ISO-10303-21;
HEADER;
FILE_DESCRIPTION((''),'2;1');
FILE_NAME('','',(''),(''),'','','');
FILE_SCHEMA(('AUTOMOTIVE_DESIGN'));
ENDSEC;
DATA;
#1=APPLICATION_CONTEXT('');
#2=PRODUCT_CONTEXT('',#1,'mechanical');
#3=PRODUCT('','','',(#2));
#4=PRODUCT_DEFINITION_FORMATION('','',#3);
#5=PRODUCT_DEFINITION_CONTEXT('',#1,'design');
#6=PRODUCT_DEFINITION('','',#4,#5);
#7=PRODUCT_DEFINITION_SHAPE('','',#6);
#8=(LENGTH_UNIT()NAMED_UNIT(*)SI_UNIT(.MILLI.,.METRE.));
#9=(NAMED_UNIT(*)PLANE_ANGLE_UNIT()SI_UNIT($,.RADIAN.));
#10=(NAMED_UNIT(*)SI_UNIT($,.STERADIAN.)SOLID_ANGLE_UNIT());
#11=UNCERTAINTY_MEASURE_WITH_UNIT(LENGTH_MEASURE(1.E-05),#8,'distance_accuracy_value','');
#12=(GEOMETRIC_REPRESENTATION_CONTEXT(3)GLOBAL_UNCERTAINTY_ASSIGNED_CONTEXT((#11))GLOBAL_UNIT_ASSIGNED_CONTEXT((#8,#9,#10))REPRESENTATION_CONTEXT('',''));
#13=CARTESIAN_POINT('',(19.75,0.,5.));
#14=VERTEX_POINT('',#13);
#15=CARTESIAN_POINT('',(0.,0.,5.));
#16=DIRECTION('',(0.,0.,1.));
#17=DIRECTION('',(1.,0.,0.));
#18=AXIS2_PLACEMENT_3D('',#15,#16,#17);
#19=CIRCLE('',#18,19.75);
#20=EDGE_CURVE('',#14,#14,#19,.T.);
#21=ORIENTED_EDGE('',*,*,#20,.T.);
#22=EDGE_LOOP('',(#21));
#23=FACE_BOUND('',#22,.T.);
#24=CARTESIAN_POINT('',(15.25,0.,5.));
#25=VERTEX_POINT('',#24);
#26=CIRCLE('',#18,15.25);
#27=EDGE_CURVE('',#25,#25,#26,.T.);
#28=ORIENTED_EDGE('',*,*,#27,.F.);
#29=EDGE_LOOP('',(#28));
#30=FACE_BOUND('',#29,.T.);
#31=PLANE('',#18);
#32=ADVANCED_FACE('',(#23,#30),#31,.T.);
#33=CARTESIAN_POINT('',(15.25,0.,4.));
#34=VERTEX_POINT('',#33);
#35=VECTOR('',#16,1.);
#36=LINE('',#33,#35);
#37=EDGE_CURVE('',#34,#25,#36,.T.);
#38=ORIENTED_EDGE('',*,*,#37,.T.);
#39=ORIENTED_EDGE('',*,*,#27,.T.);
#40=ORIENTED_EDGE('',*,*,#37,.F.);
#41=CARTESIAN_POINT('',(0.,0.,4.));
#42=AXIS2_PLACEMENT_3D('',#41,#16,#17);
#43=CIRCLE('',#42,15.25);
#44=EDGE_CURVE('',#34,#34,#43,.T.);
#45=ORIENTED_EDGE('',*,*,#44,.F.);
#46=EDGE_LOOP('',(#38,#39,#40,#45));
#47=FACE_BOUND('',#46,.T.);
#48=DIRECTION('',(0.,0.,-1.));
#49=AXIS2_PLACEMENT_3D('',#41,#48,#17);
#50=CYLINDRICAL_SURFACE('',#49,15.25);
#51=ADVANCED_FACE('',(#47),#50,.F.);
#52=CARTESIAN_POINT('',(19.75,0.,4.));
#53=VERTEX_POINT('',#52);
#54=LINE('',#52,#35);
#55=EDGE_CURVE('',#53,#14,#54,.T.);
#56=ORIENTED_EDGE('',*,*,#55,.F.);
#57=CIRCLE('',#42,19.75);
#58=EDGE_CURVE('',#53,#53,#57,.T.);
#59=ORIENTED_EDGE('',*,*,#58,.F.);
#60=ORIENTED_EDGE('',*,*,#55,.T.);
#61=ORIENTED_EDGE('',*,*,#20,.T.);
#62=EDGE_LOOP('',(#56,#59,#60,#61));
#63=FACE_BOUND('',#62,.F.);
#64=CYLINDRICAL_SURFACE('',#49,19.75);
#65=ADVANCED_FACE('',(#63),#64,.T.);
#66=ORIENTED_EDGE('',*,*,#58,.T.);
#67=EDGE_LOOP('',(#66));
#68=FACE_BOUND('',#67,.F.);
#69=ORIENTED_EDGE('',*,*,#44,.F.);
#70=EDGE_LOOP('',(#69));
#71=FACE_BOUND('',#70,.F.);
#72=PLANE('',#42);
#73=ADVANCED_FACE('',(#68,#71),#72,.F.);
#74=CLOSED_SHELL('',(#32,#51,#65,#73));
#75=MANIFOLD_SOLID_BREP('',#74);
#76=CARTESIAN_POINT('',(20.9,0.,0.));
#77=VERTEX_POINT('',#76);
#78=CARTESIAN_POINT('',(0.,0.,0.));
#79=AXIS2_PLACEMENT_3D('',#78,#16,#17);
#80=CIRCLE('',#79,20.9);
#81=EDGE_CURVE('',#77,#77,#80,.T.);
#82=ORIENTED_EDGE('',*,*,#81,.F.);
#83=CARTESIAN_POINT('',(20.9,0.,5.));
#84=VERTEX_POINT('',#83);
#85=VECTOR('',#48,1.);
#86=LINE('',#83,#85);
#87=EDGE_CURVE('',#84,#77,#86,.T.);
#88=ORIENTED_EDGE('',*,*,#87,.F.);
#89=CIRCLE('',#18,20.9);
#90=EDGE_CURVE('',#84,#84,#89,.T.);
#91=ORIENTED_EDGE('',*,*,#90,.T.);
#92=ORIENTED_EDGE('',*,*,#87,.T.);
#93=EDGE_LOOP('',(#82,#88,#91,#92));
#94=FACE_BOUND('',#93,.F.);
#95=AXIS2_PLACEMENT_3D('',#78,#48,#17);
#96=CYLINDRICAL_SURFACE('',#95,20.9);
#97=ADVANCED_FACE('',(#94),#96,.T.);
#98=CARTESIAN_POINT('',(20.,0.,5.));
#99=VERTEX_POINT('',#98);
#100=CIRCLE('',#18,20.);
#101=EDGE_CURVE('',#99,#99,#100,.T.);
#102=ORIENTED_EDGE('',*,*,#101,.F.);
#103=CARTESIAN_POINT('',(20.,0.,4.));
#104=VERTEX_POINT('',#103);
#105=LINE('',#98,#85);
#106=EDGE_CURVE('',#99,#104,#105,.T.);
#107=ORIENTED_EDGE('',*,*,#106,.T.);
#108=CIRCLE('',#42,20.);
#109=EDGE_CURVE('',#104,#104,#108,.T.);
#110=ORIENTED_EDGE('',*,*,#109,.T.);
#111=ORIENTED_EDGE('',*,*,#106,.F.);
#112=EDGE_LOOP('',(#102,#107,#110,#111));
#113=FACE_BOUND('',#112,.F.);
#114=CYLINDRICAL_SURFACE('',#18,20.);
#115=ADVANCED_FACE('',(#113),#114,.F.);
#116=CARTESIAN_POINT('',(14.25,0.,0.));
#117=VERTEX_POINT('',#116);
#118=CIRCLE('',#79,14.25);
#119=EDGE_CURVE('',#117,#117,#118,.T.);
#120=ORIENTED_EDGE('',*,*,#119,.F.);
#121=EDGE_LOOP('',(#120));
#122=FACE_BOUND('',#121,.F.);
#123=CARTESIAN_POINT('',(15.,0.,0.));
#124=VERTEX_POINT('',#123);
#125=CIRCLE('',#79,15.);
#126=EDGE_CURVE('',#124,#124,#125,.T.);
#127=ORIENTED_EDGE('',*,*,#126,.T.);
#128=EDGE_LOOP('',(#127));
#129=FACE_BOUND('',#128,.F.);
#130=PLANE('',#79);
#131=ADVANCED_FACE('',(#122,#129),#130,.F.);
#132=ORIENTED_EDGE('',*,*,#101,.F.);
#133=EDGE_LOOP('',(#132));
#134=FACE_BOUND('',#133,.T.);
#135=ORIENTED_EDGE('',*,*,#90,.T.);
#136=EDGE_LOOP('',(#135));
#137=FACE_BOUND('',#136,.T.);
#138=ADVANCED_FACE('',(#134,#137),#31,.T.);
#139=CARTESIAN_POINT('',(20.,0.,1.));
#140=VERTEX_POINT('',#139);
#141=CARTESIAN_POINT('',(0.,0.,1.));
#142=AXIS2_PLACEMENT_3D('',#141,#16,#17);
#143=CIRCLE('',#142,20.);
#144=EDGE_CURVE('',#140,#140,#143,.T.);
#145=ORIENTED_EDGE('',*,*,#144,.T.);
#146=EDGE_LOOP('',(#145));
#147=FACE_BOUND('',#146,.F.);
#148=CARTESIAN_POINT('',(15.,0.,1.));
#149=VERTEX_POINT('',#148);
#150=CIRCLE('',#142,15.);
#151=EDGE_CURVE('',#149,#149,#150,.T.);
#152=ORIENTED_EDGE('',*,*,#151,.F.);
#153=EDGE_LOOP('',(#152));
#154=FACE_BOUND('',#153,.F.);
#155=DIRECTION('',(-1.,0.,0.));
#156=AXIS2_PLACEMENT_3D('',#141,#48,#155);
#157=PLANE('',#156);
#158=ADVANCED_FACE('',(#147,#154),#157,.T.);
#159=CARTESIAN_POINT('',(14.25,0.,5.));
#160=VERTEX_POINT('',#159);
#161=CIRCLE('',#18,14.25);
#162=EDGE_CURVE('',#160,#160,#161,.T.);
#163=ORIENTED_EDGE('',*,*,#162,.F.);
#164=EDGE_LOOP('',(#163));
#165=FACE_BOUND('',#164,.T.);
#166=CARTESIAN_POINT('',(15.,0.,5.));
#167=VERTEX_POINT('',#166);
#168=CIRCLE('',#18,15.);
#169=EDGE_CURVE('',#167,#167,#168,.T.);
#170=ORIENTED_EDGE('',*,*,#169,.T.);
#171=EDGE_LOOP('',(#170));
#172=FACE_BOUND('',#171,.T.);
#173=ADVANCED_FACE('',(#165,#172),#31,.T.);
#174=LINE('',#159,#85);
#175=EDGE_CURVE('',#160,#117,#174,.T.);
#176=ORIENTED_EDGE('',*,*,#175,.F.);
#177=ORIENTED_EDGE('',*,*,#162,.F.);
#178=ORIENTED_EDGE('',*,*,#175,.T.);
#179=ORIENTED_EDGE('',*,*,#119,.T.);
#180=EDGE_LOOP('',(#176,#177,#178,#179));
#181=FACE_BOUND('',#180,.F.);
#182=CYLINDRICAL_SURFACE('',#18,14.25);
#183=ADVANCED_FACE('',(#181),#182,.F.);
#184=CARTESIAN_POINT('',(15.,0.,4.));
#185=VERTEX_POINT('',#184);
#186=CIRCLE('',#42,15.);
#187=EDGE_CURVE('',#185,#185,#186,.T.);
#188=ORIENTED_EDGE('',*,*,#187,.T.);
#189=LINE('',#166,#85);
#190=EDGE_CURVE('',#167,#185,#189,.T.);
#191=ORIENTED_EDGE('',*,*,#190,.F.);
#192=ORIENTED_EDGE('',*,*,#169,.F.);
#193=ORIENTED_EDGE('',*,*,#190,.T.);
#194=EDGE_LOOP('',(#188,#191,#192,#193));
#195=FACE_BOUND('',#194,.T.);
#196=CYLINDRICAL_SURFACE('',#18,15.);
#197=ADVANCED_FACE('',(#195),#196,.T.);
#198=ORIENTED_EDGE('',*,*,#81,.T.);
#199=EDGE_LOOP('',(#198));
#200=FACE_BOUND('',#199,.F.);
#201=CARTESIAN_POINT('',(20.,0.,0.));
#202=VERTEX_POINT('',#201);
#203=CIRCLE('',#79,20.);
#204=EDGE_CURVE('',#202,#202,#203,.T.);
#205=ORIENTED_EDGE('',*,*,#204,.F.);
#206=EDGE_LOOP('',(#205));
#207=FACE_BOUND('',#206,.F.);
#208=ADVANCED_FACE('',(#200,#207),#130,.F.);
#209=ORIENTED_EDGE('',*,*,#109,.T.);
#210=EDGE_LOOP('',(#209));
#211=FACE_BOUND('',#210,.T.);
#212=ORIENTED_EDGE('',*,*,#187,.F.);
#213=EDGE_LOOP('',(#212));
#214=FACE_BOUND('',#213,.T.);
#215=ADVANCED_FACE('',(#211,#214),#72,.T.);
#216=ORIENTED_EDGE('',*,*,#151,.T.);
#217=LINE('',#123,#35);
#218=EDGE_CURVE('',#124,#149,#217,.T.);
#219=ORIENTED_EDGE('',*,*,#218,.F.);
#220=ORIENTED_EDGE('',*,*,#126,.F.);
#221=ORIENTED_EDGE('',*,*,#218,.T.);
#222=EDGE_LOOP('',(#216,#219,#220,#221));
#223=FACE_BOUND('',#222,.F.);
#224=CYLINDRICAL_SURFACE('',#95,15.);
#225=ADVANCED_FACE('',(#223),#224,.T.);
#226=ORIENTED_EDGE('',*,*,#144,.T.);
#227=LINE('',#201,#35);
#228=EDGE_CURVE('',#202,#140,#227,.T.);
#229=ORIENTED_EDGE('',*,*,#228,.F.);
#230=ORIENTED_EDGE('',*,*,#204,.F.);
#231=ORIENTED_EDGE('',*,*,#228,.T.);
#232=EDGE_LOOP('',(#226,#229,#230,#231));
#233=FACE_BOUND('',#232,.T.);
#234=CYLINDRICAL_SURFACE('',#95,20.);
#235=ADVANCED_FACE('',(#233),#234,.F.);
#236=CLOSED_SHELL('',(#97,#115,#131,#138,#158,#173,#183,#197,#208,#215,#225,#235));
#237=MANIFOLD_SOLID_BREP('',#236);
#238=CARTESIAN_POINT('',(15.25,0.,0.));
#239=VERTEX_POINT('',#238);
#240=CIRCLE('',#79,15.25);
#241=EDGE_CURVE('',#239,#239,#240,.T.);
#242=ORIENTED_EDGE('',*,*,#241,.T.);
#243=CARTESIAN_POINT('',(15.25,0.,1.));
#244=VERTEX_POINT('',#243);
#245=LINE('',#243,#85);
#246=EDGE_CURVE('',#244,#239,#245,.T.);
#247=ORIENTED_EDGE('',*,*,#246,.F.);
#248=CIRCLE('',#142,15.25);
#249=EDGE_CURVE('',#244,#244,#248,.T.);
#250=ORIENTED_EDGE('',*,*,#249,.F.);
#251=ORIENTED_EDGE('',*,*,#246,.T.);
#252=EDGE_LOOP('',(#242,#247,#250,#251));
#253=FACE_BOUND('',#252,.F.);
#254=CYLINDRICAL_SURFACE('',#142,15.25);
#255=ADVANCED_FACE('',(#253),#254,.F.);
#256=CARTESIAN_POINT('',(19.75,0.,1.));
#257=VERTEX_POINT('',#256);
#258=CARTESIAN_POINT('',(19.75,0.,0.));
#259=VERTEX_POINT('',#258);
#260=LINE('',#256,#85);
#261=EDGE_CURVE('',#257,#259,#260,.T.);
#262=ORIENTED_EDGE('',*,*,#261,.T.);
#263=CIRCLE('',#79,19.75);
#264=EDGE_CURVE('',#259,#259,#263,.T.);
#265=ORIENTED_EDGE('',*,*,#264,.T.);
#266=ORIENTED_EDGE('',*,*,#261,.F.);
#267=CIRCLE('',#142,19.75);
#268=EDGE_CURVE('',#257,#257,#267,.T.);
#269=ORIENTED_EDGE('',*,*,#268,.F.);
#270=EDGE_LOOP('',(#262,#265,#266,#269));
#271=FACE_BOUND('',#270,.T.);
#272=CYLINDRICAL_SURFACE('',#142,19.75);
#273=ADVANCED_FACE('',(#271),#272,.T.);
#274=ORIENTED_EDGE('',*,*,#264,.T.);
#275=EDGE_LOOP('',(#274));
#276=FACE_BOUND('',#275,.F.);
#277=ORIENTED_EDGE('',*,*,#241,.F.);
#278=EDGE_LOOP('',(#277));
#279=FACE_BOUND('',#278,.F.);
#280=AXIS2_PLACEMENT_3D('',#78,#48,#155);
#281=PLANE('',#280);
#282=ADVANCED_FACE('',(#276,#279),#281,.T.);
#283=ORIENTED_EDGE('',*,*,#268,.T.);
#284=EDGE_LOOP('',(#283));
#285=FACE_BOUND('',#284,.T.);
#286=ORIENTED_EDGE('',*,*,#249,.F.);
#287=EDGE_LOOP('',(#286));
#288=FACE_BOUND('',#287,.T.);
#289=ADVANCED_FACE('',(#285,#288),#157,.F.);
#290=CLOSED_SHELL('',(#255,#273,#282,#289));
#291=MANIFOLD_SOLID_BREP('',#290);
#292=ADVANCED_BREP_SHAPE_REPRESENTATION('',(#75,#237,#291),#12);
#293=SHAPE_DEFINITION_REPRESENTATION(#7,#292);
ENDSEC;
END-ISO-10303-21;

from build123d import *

# Parameters (mm, degrees)
F0_R     = 20.9
F1_DEPTH = 5
F2_R     = 14.25
F3_DEPTH = 25
F4_R     = 20
F4_R_2   = 15
F5_DEPTH = 1
F6_R     = 19.75
F6_R_2   = 15.25
F7_DEPTH = 1
F8_R     = 29.8872921221
F8_R_2   = 20.9
F9_DEPTH = 2.5


# Not quite as in the source:
# - a feature of the source that left no trace in its solid (it failed there, or was rolled back) is left out
# - a pattern or mirror of a feature is missing from the dataset's text; its kind, count and spacing are read off the source's solid


with BuildPart() as f1:
    # F0 (on Top) → F1 (new body)
    with BuildSketch(Plane.XY):
        Circle(F0_R)
    extrude(amount=F1_DEPTH)

    # F2 (on face) → F3 (cut)
    with BuildSketch(Plane.XY.offset(5)):
        Circle(F2_R)
    extrude(amount=-F3_DEPTH, mode=Mode.SUBTRACT)

    # F4 (on face) → F5 (cut)
    with BuildSketch(Plane.XY.offset(5)):
        Circle(F4_R)
        Circle(F4_R_2, mode=Mode.SUBTRACT)
    f5 = extrude(amount=-F5_DEPTH, mode=Mode.SUBTRACT)

    # F5_copies: F5 across plane
    add(f5.mirror(Plane(origin=(0, 0, 2.5), x_dir=(-1, 0, 0), z_dir=(0, 0, -1))), mode=Mode.SUBTRACT)

    # F8 (on face) → F9 (cut)
    with BuildSketch(Plane(origin=(0, 0, 0), x_dir=(1, 0, 0), z_dir=(0, 0, -1))):
        Circle(F8_R)
        Circle(F8_R_2, mode=Mode.SUBTRACT)
    extrude(amount=-F9_DEPTH, mode=Mode.SUBTRACT)


with BuildPart() as f7:
    # F6 (on face) → F7 (new body)
    with BuildSketch(Plane.XY.offset(4)):
        Circle(F6_R)
        Circle(F6_R_2, mode=Mode.SUBTRACT)
    extrude(amount=F7_DEPTH)


with BuildPart() as f7_copies_1:
    # F7_copies: instance of F7
    add(f7.part.mirror(Plane(origin=(0, 0, 2.5), x_dir=(-1, 0, 0), z_dir=(0, 0, -1))))


solid = Compound([f1.part, f7.part, f7_copies_1.part])
